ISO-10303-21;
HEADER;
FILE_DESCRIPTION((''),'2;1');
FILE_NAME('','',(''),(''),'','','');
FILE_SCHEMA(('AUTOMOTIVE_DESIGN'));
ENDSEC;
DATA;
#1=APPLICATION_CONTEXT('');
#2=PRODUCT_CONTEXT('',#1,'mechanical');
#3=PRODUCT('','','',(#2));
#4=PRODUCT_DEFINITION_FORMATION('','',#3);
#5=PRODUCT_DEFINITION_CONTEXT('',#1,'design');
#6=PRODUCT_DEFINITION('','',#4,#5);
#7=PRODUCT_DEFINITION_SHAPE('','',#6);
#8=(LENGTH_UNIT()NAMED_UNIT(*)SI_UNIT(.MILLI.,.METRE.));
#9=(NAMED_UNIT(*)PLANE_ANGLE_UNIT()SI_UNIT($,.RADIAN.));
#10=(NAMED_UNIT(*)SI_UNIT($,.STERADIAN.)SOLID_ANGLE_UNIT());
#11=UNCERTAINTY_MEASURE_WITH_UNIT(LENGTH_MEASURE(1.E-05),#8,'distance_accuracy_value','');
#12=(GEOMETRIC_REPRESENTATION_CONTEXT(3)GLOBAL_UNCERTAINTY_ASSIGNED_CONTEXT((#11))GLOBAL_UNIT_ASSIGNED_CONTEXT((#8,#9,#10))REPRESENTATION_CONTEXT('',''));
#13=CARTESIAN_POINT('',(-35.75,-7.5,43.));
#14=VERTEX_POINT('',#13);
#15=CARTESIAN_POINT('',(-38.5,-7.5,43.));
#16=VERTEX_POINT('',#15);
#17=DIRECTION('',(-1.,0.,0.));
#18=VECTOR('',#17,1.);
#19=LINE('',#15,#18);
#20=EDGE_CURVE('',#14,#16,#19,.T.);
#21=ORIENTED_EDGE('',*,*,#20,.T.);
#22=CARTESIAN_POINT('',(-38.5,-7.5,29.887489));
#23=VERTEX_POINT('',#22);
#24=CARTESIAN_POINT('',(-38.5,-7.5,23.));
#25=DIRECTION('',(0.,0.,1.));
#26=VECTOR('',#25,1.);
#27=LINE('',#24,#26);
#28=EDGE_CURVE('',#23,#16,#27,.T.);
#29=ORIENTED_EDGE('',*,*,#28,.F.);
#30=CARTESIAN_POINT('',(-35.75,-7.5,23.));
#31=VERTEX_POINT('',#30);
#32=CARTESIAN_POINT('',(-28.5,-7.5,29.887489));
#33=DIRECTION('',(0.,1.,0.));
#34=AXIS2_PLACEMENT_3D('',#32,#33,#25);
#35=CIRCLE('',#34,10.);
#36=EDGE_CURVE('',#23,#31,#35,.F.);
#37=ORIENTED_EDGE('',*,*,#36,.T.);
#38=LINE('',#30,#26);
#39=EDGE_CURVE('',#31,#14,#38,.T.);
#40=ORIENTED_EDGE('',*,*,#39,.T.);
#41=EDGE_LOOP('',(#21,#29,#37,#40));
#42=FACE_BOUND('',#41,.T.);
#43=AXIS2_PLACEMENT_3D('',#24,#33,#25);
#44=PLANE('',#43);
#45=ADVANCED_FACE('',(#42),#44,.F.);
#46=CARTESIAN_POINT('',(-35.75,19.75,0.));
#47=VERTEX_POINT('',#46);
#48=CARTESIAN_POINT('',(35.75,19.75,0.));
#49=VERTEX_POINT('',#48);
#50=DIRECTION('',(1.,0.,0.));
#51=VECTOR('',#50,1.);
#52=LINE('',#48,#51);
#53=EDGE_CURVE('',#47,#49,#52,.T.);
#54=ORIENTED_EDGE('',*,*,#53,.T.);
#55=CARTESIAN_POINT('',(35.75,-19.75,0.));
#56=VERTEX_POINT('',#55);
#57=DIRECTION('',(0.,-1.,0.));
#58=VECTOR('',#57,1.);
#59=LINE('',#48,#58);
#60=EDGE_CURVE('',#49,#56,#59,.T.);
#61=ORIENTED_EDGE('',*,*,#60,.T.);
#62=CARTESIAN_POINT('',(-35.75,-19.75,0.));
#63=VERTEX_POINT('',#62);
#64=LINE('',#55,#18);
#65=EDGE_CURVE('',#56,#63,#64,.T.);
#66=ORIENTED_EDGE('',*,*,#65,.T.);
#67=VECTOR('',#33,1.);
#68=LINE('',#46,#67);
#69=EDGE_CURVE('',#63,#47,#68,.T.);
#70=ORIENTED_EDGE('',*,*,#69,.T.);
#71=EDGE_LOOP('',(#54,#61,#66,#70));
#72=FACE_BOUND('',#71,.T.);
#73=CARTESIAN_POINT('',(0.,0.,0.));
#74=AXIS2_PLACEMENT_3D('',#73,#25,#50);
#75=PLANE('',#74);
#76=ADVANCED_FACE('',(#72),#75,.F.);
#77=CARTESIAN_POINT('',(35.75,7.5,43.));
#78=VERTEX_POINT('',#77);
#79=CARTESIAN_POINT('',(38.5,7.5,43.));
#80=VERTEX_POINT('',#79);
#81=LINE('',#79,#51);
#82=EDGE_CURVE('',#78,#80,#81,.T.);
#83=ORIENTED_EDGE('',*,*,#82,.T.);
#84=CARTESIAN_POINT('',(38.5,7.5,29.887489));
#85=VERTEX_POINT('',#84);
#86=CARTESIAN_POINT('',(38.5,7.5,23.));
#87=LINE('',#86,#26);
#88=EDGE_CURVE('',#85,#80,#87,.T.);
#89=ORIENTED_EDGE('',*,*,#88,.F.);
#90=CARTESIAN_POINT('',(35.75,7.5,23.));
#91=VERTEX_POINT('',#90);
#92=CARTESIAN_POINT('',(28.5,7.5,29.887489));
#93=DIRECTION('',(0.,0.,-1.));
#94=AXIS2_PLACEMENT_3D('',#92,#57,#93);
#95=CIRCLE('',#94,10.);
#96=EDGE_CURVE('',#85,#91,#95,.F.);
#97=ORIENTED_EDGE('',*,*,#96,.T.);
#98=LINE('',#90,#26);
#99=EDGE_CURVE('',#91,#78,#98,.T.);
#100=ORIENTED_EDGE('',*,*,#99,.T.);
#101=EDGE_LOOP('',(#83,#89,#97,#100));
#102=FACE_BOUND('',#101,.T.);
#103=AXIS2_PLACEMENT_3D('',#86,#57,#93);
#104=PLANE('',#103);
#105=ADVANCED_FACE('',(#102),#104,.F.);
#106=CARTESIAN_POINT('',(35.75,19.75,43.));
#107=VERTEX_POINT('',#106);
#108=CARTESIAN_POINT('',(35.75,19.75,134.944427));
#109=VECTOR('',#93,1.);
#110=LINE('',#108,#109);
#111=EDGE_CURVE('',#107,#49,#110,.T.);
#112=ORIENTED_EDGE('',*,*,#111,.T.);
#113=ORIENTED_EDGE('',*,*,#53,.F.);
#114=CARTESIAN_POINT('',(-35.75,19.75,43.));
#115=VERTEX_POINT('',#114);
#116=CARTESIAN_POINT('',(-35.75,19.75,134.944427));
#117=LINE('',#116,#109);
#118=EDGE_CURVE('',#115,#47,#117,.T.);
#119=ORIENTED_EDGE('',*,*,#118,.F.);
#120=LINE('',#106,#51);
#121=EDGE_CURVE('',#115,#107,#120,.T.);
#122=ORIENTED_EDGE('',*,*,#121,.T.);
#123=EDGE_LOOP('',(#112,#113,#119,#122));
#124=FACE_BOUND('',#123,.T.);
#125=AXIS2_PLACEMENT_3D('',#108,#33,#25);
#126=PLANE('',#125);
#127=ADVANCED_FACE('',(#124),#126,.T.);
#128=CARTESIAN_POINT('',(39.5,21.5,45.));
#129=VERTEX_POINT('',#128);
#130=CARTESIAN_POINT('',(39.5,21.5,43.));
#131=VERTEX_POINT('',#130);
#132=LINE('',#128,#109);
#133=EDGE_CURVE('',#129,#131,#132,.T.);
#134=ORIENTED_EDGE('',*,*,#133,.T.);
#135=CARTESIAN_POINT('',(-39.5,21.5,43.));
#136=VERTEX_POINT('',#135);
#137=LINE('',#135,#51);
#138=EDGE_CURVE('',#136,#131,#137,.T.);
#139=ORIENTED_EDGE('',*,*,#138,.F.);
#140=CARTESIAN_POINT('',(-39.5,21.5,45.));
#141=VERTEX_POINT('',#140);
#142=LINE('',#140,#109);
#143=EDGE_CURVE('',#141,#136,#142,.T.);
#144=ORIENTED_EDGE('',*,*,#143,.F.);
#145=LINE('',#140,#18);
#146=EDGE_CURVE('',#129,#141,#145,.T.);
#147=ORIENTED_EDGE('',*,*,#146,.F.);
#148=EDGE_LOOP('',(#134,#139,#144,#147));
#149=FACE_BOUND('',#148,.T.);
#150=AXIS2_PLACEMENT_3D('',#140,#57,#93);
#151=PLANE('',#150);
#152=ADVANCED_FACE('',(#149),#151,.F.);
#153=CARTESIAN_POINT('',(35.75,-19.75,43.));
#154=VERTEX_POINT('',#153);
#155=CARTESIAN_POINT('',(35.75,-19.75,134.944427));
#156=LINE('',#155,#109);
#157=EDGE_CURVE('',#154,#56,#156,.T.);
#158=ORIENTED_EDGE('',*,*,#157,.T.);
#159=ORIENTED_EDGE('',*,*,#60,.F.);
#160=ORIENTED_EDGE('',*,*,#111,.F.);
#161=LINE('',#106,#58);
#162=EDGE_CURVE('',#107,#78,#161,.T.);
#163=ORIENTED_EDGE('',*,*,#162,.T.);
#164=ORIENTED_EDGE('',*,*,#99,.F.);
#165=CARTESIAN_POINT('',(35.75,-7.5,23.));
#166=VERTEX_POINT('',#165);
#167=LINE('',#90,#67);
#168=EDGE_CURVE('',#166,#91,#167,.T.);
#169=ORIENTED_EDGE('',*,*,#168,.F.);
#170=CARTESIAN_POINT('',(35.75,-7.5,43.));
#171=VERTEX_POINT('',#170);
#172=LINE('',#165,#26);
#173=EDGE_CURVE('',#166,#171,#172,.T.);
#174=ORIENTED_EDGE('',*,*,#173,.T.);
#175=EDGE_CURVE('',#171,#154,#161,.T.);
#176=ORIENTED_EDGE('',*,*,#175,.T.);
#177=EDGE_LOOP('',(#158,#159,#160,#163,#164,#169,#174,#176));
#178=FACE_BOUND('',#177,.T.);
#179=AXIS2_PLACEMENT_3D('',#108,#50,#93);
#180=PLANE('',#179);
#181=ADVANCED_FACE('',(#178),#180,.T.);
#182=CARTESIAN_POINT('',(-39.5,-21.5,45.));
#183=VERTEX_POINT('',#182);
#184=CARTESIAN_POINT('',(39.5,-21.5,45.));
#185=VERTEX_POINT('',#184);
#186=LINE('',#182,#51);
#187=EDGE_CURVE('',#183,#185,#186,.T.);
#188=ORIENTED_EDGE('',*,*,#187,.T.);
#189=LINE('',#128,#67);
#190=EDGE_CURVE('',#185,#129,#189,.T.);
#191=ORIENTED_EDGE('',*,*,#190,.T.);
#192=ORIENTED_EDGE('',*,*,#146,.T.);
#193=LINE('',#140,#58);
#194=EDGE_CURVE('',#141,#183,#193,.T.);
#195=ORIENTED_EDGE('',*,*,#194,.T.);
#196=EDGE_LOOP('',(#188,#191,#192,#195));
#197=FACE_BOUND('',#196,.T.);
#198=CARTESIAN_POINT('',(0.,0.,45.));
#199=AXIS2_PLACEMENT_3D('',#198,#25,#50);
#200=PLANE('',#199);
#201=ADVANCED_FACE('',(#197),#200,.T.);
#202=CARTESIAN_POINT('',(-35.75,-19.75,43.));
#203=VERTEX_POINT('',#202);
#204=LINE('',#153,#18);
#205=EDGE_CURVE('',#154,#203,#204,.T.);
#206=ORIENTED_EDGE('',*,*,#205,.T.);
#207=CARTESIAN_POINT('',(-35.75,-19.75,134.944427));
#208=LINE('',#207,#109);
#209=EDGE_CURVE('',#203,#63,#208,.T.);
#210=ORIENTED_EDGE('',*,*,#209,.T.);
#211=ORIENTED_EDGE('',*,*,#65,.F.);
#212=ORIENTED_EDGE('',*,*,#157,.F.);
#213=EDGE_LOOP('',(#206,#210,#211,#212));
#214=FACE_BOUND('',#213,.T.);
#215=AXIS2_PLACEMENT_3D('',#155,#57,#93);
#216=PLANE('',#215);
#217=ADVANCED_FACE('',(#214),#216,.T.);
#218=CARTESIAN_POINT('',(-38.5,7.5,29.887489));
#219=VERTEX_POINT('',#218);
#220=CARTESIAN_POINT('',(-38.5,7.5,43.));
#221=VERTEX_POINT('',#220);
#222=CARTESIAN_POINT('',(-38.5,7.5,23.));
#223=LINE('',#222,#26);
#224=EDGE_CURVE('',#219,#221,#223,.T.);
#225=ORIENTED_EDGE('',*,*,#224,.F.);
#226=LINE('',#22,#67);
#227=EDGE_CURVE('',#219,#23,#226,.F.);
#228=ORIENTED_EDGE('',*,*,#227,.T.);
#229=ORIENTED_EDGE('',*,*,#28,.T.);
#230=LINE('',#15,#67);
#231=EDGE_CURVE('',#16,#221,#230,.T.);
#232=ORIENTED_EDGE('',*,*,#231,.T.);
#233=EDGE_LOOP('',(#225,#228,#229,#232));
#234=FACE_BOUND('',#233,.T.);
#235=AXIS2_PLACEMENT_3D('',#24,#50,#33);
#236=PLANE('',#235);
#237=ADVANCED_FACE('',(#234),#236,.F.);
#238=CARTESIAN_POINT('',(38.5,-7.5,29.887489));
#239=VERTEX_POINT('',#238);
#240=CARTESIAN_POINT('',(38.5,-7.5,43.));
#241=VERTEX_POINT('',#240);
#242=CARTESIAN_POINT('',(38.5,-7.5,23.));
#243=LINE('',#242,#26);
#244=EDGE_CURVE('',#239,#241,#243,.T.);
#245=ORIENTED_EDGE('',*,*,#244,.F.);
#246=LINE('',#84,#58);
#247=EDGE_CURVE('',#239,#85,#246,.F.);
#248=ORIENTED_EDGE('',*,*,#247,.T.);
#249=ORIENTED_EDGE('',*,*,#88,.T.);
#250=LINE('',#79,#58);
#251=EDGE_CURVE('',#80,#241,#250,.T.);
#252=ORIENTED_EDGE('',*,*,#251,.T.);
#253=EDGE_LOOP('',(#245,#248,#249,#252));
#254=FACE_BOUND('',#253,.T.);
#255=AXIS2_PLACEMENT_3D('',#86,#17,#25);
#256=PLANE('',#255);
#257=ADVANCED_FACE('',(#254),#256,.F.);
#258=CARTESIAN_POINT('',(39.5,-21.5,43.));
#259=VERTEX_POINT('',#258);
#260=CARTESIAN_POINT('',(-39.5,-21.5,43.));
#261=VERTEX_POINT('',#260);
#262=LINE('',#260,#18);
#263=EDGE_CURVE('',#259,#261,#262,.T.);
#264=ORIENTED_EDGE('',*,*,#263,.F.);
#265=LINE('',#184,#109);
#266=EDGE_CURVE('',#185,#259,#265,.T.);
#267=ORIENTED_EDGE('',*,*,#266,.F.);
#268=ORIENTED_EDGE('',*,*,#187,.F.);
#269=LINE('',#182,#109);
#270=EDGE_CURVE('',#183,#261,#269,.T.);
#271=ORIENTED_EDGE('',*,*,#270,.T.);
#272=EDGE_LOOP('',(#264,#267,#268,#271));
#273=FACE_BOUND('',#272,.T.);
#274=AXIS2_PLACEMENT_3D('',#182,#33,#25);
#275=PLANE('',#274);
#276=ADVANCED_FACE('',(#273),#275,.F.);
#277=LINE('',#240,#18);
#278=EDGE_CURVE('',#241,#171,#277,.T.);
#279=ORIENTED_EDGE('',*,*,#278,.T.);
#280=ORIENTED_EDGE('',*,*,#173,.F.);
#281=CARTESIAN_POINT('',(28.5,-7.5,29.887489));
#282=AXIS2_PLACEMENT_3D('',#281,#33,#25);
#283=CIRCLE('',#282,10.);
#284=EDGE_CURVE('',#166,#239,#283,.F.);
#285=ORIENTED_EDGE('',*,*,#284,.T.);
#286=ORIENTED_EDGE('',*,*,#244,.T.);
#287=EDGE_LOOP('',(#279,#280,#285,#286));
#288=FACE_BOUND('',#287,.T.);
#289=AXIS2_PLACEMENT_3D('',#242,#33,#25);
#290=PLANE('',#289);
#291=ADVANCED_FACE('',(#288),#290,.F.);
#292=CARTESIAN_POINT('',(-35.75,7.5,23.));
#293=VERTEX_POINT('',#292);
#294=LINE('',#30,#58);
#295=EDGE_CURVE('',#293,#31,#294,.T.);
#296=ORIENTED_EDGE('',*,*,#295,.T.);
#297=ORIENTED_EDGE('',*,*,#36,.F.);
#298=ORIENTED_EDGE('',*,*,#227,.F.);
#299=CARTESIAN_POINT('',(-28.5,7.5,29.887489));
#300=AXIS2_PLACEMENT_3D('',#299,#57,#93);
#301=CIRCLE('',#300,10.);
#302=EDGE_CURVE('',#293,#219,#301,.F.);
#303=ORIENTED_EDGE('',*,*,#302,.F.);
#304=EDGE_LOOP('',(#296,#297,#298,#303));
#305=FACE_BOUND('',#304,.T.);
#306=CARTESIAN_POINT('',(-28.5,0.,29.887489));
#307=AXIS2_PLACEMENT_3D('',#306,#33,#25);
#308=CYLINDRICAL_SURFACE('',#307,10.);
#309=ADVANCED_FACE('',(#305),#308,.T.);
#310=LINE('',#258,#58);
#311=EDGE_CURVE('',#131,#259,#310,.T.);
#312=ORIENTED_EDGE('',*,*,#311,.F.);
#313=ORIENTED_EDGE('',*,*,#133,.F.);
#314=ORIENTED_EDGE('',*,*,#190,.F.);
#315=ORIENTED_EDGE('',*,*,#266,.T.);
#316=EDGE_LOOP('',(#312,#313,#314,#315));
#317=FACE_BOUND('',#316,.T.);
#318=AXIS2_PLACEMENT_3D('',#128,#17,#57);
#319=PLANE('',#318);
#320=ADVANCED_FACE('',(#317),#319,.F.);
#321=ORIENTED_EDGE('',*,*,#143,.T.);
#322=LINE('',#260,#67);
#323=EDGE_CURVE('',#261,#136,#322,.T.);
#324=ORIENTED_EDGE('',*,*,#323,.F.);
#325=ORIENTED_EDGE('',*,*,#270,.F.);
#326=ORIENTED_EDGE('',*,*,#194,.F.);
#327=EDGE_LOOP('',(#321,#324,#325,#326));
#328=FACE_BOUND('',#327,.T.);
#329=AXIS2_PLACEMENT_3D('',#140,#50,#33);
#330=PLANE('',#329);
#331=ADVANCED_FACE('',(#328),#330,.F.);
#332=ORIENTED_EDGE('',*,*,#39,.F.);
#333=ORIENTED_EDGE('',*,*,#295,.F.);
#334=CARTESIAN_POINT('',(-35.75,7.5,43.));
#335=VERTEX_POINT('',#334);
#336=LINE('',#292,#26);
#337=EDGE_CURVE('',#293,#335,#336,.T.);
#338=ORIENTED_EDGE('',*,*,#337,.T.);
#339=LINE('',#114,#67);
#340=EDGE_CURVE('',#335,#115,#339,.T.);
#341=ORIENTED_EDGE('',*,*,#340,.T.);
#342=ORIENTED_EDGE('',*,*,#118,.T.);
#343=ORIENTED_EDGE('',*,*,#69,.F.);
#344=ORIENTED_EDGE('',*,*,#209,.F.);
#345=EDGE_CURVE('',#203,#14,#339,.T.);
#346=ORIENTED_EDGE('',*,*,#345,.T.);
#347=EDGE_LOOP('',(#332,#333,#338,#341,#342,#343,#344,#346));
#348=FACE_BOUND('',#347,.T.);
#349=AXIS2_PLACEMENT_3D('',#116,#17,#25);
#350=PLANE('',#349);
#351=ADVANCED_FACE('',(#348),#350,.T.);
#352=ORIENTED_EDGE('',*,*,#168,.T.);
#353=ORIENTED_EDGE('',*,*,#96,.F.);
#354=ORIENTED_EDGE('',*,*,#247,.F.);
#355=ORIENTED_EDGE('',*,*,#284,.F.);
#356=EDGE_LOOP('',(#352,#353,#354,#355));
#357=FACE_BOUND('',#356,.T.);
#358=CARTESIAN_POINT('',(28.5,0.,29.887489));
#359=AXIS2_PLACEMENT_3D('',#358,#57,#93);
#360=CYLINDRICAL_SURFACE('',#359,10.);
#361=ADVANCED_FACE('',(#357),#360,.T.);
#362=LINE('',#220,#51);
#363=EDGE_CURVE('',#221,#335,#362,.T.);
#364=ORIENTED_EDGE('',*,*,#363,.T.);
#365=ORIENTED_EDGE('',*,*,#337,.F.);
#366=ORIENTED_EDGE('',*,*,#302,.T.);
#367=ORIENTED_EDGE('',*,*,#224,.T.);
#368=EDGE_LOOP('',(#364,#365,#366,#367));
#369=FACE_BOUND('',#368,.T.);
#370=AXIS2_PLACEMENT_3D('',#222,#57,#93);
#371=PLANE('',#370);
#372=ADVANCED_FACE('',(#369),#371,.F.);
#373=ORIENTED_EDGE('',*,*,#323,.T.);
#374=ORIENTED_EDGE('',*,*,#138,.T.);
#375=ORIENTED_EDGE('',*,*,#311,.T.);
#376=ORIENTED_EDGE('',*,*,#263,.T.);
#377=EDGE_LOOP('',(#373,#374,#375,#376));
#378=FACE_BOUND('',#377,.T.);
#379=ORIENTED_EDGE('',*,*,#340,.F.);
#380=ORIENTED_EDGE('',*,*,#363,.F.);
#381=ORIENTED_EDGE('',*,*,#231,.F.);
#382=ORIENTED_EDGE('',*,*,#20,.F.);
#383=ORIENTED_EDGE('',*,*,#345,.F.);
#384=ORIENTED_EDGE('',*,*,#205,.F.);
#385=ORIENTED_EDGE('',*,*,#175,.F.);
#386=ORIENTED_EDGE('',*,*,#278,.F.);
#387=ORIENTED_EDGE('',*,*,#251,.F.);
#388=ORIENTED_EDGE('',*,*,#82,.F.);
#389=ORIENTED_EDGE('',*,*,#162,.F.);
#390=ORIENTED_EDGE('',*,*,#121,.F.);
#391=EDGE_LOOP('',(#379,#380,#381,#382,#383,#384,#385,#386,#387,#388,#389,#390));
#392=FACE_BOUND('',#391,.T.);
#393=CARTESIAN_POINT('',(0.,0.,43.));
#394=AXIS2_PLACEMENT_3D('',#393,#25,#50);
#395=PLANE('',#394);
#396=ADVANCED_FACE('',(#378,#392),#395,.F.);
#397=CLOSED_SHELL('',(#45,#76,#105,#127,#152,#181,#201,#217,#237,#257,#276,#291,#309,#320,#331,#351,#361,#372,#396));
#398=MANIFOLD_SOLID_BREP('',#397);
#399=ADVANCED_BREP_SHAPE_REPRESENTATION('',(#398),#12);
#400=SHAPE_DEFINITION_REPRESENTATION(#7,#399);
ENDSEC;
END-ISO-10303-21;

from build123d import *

# Parameters (mm, degrees)
SKIZZE1_W                       = 79
SKIZZE1_H                       = 43
AUFSATZ_LINEAR_AUSTRAGEN1_DEPTH = 45
SKIZZE2_W                       = 79
SKIZZE2_H                       = 43
SKIZZE2_W_2                     = 71.5
SKIZZE2_H_2                     = 39.5
SCHNITT_LINEAR_AUSTRAGEN1_DEPTH = 43
SKIZZE3_W                       = 2.75
SKIZZE3_H                       = 15
AUFSATZ_LINEAR_AUSTRAGEN2_DEPTH = 20
VERRUNDUNG1_R                   = 10


with BuildPart() as part:
    # Skizze1 → Aufsatz-Linear austragen1 (new body)
    with BuildSketch(Plane.XY):
        Rectangle(SKIZZE1_W, SKIZZE1_H)
    extrude(amount=AUFSATZ_LINEAR_AUSTRAGEN1_DEPTH)

    # Skizze2 → Schnitt-Linear austragen1 (cut)
    with BuildSketch(Plane(origin=(0, 0, 0), x_dir=(-1, 0, 0), z_dir=(0, 0, -1))):
        Rectangle(SKIZZE2_W, SKIZZE2_H)
        Rectangle(SKIZZE2_W_2, SKIZZE2_H_2, mode=Mode.SUBTRACT)
    extrude(amount=-SCHNITT_LINEAR_AUSTRAGEN1_DEPTH, mode=Mode.SUBTRACT)

    # Skizze3 → Aufsatz-Linear austragen2 (add)
    with BuildSketch(Plane(origin=(0, 0, 43), x_dir=(-1, 0, 0), z_dir=(0, 0, -1))):
        with Locations((-37.125, 0)):
            Rectangle(SKIZZE3_W, SKIZZE3_H)
        with Locations((37.125, 0)):
            Rectangle(SKIZZE3_W, SKIZZE3_H)
    extrude(amount=AUFSATZ_LINEAR_AUSTRAGEN2_DEPTH)

    # Verrundung1
    # the kernel refuses this fillet: 10 mm, written as the material it takes off along each edge
    with BuildSketch(Plane(origin=(-38.5, 24.718721642, 23), x_dir=(0, 0, 1), z_dir=(0, -1, 0)), Plane(origin=(38.5, -24.718721642, 23), x_dir=(0, 0, 1), z_dir=(0, 1, 0))) as verrundung1_piece_1:
        with BuildLine():
            CenterArc((6.887488657, -10), VERRUNDUNG1_R, 90, 43.531152167)
            Line((0, -2.75), (-0.137749773, -2.605))
            ThreePointArc((-0.137749773, -2.605), (-0.2, -1.375), (-0.2, 0))
            Line((-0.2, 0), (0, 0.2))
            Line((0, 0.2), (6.887488657, 0.2))
            Line((6.887488657, 0.2), (6.887488657, 0))
        make_face()
    extrude(amount=49.437443285, mode=Mode.SUBTRACT)


solid = part.part
